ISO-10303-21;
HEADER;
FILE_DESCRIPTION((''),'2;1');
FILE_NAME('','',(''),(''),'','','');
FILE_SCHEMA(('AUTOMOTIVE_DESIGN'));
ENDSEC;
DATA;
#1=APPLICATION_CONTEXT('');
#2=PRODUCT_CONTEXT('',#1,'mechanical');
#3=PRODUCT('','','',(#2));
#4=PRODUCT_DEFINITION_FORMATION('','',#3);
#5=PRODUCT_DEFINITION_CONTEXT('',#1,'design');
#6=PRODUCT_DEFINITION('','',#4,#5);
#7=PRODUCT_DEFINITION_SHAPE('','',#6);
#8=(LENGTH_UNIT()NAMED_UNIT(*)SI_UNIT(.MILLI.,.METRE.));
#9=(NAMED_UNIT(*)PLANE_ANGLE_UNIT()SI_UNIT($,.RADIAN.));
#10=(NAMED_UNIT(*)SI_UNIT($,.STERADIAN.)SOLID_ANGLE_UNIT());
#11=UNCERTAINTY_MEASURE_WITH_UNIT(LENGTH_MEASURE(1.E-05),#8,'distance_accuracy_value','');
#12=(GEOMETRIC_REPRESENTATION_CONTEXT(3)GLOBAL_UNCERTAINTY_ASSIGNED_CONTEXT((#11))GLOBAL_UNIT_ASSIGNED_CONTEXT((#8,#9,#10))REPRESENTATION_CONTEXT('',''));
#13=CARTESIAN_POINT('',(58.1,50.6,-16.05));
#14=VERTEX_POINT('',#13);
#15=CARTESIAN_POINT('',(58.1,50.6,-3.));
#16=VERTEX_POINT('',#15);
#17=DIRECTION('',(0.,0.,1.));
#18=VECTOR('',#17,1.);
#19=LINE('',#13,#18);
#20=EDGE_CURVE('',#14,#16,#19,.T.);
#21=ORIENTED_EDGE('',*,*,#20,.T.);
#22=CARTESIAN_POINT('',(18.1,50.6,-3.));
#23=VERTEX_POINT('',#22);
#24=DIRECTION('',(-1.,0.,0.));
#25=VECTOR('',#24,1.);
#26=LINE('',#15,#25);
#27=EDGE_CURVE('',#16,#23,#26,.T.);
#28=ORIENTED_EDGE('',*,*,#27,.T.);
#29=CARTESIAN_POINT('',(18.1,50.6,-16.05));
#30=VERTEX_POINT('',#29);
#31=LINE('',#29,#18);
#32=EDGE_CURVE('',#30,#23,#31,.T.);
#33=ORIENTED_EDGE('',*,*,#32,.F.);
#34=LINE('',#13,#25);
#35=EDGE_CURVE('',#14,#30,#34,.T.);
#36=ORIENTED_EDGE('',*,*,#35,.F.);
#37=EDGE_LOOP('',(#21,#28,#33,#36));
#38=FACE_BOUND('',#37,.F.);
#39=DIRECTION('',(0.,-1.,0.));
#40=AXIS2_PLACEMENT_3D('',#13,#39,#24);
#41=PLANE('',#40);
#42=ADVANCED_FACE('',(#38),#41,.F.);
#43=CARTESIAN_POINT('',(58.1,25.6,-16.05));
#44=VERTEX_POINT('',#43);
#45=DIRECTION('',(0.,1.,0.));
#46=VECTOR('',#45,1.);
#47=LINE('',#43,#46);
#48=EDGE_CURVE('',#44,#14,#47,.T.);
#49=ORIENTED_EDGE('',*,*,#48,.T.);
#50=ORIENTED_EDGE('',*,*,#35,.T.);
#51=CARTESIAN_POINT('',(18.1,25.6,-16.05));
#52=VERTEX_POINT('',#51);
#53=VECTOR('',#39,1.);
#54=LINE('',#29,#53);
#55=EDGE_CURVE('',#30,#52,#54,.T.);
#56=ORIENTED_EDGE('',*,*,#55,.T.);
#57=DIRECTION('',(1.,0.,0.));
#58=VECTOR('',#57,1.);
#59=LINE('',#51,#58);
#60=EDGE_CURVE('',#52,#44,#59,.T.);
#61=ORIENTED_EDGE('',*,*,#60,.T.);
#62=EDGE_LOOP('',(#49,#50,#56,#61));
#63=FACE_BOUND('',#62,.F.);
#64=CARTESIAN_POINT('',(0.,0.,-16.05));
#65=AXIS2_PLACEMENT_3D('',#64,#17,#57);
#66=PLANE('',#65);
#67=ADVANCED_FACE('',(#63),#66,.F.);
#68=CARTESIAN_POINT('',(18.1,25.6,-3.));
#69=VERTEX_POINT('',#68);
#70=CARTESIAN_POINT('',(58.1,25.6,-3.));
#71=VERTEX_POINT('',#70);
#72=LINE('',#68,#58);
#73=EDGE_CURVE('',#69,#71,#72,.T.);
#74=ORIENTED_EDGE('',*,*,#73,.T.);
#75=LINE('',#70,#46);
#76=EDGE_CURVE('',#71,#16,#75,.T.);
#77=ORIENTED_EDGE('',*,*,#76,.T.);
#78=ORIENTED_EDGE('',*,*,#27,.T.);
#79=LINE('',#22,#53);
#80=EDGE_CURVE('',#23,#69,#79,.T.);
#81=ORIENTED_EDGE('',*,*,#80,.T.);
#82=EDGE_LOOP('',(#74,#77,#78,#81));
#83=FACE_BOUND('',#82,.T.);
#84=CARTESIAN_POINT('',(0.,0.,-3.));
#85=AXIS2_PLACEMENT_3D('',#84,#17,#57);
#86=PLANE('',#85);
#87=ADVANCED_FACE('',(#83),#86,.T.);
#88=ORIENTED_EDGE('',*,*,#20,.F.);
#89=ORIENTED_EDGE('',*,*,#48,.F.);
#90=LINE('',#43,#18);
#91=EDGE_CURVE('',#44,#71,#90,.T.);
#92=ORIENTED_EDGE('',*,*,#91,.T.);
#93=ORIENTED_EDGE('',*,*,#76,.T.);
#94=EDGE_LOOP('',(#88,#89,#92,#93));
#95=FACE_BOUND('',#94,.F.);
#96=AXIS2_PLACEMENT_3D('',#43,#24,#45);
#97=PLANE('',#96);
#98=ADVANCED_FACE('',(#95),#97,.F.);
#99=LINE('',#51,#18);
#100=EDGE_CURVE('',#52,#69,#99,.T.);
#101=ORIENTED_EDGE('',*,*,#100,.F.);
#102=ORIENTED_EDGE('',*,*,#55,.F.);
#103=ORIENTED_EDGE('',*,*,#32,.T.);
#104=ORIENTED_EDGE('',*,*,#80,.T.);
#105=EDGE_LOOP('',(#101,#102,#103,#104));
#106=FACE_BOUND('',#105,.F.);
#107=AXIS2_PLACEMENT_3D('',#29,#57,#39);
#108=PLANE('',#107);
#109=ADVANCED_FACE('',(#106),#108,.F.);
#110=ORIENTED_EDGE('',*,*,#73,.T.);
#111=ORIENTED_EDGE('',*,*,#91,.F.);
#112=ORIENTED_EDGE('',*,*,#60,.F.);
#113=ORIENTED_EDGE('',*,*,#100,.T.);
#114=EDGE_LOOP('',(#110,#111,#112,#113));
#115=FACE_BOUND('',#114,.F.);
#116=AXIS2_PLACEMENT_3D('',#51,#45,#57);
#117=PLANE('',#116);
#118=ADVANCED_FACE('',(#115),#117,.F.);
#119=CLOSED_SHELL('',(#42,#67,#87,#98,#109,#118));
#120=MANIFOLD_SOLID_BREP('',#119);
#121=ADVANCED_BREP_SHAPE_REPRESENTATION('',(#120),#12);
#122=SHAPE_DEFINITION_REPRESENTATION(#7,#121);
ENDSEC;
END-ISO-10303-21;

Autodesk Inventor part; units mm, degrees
ref_plane "YZ Plane" through (0, 0, 0) normal (1, 0, 0) x (0, 1, 0)
ref_plane "XZ Plane" through (0, 0, 0) normal (0, 1, 0) x (-1, 0, 0)
sketch "Sketch1" plane through (0, 0, 0) normal (0, 0, 1) x (1, 0, 0)
  line L0 (0, 76.2) -> (76.2, 76.2)
  line L1 (76.2, 76.2) -> (76.2, 0)
  line L2 (76.2, 0) -> (0, 0)
  line L3 (0, 0) -> (0, 76.2)
  dimension "d0" = 76.2
  dimension "d1" = 76.2
surface extrude "ExtrusionSrf1" sketch "Sketch1" against normal blind 19.05 shown yes curves L3 L0 L1 L2
ref_plane "Work Plane1" through (0, 0, -19.05) normal (0, 0, 1) x (1, 0, 0)
ref_plane "Work Plane2" through (0, 0, -3) normal (0, 0, 1) x (1, 0, 0)
ref_plane "Work Plane3" through (0, 0, -16.05) normal (0, 0, 1) x (1, 0, 0)
sketch "Sketch2" plane through (0, 0, -16.05) normal (0, 0, 1) x (1, 0, 0)
  line L0 (18.1, 25.6) -> (58.1, 25.6)
  line L1 (58.1, 25.6) -> (58.1, 50.6)
  line L2 (58.1, 50.6) -> (18.1, 50.6)
  line L3 (18.1, 50.6) -> (18.1, 25.6)
  line L4 (18.1, 25.6) -> (58.1, 50.6) construction
  line L5 (58.1, 25.6) -> (18.1, 50.6) construction
  point P0 (0, 0)
  point P1 (38.1, 38.1)
  dimension "d7" = 40
  dimension "d8" = 25
  dimension "d9" = 38.1
  dimension "d10" = 38.1
extrude "Extrusion1" add sketch "Sketch2" along normal up to surface (13.05 mm away)
properties part number "molde"
